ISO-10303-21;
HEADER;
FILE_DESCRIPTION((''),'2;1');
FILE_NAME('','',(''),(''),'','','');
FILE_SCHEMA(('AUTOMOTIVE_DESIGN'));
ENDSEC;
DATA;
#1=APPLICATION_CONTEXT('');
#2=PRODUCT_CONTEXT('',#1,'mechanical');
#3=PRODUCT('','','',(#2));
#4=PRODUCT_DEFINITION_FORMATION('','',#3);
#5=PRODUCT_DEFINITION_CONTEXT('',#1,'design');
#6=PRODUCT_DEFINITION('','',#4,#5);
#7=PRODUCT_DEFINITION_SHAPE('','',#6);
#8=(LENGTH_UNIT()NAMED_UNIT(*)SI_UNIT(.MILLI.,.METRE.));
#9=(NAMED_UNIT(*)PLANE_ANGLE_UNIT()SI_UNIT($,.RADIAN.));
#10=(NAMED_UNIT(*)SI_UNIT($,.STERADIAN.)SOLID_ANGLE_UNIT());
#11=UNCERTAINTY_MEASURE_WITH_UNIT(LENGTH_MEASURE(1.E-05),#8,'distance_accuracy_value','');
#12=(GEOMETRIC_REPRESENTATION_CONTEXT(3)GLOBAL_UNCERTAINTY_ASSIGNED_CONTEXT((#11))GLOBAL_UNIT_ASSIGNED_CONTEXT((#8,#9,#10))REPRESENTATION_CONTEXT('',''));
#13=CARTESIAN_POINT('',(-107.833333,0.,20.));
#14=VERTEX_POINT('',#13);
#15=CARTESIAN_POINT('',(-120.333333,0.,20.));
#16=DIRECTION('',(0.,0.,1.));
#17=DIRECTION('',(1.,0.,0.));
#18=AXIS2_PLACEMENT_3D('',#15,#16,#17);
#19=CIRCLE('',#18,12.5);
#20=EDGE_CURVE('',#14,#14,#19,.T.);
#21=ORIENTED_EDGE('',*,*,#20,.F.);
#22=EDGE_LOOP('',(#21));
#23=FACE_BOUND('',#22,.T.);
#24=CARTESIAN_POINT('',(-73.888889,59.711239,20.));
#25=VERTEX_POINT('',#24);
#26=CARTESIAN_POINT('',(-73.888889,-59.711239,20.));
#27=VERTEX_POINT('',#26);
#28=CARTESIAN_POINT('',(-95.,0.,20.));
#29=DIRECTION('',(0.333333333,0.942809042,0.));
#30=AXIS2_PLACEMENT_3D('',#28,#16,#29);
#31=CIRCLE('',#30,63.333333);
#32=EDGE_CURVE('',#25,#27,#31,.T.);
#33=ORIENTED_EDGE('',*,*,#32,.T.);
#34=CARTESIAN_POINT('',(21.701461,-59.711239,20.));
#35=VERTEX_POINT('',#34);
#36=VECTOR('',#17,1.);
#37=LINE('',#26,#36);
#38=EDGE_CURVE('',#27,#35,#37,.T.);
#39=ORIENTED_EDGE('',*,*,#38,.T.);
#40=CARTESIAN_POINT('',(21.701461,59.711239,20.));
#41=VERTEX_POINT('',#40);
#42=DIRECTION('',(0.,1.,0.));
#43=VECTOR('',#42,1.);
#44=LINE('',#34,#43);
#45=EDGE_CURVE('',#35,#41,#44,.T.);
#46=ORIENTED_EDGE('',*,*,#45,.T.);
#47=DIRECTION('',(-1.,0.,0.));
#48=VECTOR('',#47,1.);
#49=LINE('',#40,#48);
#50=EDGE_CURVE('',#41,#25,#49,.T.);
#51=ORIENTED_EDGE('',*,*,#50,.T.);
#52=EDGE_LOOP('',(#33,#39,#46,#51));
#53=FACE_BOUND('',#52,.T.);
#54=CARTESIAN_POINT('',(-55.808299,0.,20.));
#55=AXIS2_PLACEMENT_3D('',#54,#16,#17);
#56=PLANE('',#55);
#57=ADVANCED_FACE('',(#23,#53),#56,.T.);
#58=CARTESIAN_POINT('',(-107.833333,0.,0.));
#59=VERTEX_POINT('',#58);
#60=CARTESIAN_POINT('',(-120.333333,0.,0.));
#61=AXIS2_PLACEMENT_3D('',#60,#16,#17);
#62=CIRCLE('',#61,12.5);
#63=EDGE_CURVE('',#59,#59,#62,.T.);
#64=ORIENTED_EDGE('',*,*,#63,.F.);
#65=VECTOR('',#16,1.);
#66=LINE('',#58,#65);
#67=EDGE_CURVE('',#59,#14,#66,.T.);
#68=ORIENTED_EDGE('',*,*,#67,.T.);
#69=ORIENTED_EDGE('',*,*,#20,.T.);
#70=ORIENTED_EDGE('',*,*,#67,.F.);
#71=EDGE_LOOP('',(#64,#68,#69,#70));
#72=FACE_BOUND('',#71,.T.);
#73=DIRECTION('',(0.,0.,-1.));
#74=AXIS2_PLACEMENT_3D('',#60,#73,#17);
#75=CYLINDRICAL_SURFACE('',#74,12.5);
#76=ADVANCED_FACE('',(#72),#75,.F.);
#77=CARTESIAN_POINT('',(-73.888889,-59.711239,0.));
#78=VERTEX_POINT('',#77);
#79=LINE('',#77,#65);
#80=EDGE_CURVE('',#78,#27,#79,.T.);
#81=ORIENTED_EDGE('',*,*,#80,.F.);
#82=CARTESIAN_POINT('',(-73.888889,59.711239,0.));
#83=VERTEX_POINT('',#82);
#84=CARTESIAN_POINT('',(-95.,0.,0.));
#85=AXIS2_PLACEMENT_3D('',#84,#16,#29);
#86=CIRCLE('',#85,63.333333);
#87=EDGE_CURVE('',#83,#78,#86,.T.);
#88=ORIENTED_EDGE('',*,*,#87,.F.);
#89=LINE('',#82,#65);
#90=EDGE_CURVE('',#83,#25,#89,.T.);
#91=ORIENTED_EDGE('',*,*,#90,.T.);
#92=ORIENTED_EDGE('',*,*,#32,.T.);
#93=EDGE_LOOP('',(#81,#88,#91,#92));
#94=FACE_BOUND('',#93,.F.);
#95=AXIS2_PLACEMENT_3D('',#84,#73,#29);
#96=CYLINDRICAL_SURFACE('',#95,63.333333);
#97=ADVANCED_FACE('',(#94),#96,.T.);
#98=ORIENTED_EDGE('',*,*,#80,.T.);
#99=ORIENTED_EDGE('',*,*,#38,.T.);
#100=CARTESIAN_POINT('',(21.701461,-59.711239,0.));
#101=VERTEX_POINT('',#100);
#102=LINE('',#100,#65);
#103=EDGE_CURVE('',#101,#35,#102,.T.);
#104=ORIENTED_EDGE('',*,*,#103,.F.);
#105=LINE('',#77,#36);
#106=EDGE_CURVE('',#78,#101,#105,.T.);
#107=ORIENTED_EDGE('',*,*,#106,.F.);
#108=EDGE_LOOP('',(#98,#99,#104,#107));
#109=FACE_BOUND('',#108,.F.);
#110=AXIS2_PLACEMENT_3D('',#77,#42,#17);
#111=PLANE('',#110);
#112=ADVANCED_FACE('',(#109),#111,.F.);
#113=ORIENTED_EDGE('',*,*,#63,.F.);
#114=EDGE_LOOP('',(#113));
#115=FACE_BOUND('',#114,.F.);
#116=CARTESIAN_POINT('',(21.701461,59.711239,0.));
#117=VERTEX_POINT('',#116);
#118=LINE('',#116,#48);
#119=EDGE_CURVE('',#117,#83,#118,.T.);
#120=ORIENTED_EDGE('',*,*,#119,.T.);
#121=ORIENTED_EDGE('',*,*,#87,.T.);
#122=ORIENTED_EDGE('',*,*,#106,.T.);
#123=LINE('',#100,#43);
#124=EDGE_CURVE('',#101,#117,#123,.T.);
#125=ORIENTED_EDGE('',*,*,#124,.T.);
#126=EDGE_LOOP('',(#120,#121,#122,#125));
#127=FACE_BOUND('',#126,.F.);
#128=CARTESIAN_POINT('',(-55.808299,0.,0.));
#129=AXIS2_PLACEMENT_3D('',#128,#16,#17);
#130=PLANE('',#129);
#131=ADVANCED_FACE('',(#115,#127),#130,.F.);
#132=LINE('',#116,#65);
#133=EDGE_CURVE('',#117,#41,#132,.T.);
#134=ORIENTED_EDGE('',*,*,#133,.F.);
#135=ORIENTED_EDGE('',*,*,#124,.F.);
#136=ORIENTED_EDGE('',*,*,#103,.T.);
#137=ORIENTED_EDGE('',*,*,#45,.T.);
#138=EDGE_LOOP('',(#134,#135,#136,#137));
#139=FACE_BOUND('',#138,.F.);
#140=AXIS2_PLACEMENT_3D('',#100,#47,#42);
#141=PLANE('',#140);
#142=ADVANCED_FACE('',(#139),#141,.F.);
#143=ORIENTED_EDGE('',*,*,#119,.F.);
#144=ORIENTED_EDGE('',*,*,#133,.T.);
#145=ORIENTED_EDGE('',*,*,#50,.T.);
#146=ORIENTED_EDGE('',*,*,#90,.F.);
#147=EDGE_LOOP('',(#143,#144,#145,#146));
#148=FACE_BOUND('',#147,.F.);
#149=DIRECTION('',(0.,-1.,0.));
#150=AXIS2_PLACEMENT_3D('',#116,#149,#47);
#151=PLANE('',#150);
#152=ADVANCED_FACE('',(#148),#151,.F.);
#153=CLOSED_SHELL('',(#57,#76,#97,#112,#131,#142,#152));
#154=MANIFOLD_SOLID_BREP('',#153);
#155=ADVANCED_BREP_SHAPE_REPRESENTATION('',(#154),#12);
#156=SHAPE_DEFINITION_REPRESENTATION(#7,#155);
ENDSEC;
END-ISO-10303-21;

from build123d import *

# Parameters (mm, degrees)
F0_R     = 12.5
F1_DEPTH = 20


# Not quite as in the source:
# - a feature names something its author has since deleted; it is built from what else it names


with BuildPart() as f1:
    # F0 (on Top) → F1 (new body)
    with BuildSketch(Plane.XY):
        with BuildLine():
            Line((21.7014607042, 59.7112393002), (-73.8888888889, 59.7112393002))
            ThreePointArc((-73.8888888889, 59.7112393002), (-158.3333333333, 0), (-73.8888888889, -59.7112393002))
            Line((-73.8888888889, -59.7112393002), (21.7014607042, -59.7112393002))
            Line((21.7014607042, -59.7112393002), (21.7014607042, 59.7112393002))
        make_face()
        with Locations((-120.3333333333, 0)):
            Circle(F0_R, mode=Mode.SUBTRACT)
    extrude(amount=F1_DEPTH)


solid = f1.part
